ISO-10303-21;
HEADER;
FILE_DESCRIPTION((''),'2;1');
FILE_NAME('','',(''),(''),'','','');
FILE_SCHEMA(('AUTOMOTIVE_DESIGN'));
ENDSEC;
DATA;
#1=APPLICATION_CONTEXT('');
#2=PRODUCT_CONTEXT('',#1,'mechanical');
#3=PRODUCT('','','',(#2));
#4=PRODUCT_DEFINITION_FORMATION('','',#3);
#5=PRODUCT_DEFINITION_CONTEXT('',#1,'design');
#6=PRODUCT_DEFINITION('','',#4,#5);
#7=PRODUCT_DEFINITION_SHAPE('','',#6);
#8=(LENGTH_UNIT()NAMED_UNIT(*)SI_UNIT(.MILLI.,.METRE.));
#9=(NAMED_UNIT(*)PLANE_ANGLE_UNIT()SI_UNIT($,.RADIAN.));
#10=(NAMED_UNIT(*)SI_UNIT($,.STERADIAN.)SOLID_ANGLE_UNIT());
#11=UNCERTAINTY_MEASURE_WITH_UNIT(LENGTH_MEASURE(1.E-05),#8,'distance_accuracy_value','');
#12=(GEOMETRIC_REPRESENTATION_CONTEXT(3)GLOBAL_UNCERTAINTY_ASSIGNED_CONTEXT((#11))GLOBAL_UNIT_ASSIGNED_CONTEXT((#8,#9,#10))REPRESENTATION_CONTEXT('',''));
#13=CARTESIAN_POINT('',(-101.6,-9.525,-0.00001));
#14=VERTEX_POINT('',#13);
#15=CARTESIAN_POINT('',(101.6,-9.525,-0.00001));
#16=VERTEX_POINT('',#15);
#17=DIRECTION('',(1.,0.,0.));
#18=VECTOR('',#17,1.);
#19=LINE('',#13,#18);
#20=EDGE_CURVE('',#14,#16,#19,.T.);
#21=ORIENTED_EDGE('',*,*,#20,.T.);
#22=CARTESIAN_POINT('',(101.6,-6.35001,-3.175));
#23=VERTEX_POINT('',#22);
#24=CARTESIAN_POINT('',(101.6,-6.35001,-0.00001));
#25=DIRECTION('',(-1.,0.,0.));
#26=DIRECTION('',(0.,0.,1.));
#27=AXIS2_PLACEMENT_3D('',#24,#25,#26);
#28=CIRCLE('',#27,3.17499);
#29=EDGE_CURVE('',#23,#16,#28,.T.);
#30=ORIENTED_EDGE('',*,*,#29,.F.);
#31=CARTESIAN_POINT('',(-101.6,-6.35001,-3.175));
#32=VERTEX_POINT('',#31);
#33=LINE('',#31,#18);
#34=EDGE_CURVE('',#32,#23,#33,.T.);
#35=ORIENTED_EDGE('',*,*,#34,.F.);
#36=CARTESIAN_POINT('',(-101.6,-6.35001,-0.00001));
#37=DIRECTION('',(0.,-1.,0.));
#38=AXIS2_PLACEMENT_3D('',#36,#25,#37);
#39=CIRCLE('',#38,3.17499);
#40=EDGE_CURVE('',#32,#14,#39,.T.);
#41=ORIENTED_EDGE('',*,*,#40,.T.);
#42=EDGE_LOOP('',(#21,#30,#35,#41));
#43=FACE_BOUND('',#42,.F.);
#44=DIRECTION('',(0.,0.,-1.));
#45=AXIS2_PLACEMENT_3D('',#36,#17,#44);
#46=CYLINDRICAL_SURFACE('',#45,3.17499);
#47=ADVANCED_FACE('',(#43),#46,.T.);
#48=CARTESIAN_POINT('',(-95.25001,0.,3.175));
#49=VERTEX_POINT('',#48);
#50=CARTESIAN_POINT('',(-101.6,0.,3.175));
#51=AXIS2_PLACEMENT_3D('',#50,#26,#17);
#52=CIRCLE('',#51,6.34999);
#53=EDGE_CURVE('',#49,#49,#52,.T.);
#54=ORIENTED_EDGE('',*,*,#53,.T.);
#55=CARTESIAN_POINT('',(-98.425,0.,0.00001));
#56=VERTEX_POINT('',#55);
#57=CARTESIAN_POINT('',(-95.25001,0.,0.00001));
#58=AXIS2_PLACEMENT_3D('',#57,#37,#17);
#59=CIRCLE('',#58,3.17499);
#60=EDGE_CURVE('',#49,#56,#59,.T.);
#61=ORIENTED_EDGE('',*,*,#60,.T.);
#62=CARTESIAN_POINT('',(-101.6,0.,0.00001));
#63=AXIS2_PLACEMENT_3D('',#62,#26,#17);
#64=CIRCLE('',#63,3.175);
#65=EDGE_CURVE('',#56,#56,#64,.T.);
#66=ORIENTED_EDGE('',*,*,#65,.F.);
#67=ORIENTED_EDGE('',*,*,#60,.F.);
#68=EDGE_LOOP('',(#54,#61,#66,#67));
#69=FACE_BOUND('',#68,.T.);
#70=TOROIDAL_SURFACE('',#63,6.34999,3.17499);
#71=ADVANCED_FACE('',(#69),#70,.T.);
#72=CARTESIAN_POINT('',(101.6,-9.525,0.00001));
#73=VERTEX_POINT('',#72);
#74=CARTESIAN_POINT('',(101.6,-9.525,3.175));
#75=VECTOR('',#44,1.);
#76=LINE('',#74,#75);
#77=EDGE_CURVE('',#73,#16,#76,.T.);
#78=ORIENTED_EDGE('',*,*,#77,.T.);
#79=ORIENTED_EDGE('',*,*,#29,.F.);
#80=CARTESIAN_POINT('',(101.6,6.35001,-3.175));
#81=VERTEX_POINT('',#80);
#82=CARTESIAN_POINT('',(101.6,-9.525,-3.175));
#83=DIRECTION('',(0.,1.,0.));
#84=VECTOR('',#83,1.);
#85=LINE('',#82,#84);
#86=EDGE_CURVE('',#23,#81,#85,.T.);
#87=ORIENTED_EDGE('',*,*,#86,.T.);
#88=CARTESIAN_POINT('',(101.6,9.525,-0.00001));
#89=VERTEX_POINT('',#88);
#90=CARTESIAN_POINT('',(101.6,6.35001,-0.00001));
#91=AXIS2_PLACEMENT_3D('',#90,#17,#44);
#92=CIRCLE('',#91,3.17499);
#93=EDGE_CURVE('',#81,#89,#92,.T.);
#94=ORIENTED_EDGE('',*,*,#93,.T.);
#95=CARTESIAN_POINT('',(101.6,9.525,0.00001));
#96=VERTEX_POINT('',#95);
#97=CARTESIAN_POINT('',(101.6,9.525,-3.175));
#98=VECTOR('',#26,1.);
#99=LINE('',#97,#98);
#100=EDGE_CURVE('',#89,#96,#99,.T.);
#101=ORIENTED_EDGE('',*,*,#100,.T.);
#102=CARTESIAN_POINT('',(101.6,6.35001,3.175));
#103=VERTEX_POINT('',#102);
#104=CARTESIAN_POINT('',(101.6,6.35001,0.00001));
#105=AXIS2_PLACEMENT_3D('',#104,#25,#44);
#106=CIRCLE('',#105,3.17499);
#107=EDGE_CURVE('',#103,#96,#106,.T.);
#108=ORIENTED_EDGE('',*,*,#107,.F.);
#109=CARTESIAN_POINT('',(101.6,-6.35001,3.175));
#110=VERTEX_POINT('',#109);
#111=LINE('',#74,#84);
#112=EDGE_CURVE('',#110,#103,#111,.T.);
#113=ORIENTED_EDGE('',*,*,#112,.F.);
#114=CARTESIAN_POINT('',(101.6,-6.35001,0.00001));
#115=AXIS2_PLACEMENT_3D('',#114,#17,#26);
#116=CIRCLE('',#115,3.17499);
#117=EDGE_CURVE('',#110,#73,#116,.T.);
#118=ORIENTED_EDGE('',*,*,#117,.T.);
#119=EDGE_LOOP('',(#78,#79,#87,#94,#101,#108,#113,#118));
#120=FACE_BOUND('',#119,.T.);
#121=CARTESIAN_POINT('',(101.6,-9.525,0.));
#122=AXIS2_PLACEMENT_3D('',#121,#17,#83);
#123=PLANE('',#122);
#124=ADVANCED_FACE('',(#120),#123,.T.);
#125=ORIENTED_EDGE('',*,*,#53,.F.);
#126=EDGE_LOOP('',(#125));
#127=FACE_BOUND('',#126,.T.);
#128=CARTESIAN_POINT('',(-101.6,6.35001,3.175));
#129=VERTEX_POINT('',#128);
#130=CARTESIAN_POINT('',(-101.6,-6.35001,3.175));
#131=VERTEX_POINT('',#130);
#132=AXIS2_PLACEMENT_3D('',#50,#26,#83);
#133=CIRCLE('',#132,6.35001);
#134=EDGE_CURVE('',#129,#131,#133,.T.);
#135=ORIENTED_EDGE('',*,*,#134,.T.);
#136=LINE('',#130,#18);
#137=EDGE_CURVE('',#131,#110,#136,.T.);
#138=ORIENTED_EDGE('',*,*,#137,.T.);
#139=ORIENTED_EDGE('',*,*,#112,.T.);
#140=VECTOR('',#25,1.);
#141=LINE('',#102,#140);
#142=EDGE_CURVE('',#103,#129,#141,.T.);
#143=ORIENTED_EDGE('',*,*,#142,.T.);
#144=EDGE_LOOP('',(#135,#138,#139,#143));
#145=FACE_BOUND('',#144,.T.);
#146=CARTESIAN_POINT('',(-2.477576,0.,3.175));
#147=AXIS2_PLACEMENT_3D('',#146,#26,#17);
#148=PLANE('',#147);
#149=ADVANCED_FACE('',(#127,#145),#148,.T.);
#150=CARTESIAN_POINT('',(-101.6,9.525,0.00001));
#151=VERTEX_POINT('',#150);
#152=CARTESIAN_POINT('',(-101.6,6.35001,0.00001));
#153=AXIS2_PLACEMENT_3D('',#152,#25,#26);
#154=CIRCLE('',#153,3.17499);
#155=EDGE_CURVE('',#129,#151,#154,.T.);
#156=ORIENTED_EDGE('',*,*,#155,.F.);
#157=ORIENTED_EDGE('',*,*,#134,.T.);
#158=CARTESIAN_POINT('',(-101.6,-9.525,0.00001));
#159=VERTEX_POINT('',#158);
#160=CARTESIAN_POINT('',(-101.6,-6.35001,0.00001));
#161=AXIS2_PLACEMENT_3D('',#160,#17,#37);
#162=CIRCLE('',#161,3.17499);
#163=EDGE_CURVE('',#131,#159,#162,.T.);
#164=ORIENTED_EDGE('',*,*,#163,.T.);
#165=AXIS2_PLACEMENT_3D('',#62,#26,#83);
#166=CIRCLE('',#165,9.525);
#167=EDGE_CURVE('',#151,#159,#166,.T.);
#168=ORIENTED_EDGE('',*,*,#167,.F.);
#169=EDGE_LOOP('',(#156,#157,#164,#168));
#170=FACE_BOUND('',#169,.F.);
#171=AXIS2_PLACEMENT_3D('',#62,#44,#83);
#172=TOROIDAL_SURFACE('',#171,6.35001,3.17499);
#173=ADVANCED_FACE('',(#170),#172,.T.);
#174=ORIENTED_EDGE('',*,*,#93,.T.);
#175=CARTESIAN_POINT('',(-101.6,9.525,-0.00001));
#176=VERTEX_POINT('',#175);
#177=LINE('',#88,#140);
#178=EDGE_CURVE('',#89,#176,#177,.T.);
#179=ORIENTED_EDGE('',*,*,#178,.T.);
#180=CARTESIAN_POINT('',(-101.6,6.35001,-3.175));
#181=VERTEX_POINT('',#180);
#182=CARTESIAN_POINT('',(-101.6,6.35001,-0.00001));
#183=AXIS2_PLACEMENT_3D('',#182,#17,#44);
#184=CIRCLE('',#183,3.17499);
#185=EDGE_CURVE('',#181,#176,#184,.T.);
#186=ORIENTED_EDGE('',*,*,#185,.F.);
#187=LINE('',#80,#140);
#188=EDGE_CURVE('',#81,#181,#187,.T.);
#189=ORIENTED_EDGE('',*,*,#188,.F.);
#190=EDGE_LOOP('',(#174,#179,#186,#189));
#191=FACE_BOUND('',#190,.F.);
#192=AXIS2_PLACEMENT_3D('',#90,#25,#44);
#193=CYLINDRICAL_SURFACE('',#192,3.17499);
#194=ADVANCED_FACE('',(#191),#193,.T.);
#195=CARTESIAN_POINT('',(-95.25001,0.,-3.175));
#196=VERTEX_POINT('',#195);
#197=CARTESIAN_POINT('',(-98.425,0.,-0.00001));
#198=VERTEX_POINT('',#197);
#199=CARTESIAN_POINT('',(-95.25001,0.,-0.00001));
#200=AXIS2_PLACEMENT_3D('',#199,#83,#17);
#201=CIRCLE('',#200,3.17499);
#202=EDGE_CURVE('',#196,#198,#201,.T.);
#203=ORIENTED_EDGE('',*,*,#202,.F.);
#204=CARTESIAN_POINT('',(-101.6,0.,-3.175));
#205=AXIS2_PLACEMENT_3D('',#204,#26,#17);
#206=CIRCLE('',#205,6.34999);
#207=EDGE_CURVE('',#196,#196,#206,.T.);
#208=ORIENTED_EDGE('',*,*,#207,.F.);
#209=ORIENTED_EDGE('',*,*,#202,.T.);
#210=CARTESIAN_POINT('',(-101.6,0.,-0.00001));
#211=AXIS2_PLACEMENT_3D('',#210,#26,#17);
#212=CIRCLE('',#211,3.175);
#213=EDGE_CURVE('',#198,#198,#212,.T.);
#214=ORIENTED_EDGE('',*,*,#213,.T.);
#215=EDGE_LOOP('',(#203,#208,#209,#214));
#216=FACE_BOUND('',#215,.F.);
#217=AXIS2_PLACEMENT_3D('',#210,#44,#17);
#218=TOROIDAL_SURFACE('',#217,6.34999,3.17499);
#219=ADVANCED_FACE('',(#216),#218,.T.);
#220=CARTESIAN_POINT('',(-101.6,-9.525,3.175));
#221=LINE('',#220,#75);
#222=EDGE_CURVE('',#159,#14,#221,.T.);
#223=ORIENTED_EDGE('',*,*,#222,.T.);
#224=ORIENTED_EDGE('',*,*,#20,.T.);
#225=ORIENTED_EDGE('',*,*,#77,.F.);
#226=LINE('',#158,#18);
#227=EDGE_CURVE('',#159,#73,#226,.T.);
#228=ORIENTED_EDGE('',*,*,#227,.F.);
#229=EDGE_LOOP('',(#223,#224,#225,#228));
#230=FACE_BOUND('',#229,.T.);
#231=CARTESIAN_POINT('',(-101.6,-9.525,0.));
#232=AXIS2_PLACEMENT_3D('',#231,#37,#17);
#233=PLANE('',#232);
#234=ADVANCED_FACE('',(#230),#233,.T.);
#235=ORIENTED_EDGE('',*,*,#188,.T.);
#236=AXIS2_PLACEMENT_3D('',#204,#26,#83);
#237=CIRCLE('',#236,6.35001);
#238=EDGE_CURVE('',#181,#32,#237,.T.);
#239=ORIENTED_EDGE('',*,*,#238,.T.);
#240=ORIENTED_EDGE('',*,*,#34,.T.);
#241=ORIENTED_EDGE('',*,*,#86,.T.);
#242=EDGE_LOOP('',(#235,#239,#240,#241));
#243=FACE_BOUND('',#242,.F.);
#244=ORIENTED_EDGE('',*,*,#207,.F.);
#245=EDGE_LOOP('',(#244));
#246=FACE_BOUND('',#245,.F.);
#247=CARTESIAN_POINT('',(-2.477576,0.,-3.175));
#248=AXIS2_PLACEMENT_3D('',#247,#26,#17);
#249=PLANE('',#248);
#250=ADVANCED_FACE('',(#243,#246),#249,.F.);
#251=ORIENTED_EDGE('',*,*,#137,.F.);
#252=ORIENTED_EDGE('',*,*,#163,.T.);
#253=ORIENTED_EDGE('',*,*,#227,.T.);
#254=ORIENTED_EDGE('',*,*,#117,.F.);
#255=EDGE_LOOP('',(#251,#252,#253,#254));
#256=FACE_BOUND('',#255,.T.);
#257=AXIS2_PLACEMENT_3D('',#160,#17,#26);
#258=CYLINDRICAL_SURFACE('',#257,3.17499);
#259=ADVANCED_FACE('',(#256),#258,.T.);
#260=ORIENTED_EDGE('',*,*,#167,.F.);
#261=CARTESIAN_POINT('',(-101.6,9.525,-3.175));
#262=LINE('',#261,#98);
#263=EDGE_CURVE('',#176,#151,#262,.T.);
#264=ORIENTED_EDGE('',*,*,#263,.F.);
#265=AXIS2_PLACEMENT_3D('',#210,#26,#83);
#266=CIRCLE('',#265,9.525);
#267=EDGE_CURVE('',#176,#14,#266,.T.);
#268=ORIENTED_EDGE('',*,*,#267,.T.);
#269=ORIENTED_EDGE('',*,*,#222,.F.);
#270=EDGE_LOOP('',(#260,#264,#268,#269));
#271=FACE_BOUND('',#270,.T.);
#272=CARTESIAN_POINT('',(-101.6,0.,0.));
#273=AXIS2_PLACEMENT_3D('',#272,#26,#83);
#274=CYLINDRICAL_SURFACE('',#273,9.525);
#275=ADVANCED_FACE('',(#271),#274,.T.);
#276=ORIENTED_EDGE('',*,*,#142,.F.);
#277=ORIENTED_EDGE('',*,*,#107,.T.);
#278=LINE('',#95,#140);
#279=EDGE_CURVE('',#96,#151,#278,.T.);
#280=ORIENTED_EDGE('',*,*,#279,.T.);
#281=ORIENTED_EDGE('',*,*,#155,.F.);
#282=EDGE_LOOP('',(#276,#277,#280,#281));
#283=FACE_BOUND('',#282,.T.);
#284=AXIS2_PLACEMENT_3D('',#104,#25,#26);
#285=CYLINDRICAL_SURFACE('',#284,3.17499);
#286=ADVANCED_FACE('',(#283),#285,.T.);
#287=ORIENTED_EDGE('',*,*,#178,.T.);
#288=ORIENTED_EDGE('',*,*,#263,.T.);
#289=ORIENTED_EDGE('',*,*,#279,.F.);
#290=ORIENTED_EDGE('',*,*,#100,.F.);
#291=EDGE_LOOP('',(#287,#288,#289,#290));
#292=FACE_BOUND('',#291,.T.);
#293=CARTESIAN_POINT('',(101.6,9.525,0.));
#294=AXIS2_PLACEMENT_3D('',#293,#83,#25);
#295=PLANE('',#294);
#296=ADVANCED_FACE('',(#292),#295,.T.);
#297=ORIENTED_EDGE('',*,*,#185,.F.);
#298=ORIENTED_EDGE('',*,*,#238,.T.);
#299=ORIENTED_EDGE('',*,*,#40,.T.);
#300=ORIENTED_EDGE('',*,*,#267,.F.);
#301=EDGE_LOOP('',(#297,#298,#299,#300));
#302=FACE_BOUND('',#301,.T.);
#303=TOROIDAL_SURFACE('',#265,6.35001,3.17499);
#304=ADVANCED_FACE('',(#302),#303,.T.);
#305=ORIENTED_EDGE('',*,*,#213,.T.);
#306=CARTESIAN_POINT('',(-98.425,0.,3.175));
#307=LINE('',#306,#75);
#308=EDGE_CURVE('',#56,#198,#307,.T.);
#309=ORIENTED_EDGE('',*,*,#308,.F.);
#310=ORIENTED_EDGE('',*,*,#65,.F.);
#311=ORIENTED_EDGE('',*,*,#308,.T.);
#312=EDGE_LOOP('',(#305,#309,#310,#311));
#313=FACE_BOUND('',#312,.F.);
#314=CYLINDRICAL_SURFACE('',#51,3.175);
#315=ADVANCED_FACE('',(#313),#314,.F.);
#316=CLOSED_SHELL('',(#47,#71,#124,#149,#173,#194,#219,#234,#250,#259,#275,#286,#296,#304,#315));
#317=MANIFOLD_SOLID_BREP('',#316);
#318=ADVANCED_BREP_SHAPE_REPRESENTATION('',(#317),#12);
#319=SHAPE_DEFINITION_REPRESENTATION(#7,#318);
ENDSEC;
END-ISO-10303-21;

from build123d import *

# Parameters (mm, degrees)
F1_DEPTH = 3.175
F2_R     = 3.175
F3_DEPTH = 6.351
F4_R     = 3.17499
F5_R     = 3.17499


# Not quite as in the source:
# - a fillet or chamfer is up to 0.001 mm smaller than in the source, because OpenCascade refuses the exact size


with BuildPart() as f1:
    # F0 (on Top) → F1 (new body, symmetric)
    with BuildSketch(Plane.XY):
        with BuildLine():
            Line((101.6, -9.525), (101.6, 9.525))
            Line((101.6, 9.525), (-101.6, 9.525))
            ThreePointArc((-101.6, 9.525), (-111.125, 0), (-101.6, -9.525))
            Line((-101.6, -9.525), (101.6, -9.525))
        make_face()
    extrude(amount=F1_DEPTH, both=True)

    # F2 (on face) → F3 (cut, through all)
    with BuildSketch(Plane.XY.offset(3.175)):
        with Locations((-101.6, 0)):
            Circle(F2_R)
    extrude(amount=-F3_DEPTH, mode=Mode.SUBTRACT)

    # F4 (radius 3.175 in the source; OpenCascade refuses exactly that, so slightly less here)
    f4_edges = [f1.edges().sort_by_distance(p)[0] for p in [
        (0, -9.525, 3.175),
        (-104.775, 0, 3.175),
    ]]
    fillet(f4_edges, radius=F4_R)

    # F5 (radius 3.175 in the source; OpenCascade refuses exactly that, so slightly less here)
    f5_edges = [f1.edges().sort_by_distance(p)[0] for p in [
        (0, -9.525, -3.175),
        (-104.775, 0, -3.175),
    ]]
    fillet(f5_edges, radius=F5_R)


solid = f1.part
